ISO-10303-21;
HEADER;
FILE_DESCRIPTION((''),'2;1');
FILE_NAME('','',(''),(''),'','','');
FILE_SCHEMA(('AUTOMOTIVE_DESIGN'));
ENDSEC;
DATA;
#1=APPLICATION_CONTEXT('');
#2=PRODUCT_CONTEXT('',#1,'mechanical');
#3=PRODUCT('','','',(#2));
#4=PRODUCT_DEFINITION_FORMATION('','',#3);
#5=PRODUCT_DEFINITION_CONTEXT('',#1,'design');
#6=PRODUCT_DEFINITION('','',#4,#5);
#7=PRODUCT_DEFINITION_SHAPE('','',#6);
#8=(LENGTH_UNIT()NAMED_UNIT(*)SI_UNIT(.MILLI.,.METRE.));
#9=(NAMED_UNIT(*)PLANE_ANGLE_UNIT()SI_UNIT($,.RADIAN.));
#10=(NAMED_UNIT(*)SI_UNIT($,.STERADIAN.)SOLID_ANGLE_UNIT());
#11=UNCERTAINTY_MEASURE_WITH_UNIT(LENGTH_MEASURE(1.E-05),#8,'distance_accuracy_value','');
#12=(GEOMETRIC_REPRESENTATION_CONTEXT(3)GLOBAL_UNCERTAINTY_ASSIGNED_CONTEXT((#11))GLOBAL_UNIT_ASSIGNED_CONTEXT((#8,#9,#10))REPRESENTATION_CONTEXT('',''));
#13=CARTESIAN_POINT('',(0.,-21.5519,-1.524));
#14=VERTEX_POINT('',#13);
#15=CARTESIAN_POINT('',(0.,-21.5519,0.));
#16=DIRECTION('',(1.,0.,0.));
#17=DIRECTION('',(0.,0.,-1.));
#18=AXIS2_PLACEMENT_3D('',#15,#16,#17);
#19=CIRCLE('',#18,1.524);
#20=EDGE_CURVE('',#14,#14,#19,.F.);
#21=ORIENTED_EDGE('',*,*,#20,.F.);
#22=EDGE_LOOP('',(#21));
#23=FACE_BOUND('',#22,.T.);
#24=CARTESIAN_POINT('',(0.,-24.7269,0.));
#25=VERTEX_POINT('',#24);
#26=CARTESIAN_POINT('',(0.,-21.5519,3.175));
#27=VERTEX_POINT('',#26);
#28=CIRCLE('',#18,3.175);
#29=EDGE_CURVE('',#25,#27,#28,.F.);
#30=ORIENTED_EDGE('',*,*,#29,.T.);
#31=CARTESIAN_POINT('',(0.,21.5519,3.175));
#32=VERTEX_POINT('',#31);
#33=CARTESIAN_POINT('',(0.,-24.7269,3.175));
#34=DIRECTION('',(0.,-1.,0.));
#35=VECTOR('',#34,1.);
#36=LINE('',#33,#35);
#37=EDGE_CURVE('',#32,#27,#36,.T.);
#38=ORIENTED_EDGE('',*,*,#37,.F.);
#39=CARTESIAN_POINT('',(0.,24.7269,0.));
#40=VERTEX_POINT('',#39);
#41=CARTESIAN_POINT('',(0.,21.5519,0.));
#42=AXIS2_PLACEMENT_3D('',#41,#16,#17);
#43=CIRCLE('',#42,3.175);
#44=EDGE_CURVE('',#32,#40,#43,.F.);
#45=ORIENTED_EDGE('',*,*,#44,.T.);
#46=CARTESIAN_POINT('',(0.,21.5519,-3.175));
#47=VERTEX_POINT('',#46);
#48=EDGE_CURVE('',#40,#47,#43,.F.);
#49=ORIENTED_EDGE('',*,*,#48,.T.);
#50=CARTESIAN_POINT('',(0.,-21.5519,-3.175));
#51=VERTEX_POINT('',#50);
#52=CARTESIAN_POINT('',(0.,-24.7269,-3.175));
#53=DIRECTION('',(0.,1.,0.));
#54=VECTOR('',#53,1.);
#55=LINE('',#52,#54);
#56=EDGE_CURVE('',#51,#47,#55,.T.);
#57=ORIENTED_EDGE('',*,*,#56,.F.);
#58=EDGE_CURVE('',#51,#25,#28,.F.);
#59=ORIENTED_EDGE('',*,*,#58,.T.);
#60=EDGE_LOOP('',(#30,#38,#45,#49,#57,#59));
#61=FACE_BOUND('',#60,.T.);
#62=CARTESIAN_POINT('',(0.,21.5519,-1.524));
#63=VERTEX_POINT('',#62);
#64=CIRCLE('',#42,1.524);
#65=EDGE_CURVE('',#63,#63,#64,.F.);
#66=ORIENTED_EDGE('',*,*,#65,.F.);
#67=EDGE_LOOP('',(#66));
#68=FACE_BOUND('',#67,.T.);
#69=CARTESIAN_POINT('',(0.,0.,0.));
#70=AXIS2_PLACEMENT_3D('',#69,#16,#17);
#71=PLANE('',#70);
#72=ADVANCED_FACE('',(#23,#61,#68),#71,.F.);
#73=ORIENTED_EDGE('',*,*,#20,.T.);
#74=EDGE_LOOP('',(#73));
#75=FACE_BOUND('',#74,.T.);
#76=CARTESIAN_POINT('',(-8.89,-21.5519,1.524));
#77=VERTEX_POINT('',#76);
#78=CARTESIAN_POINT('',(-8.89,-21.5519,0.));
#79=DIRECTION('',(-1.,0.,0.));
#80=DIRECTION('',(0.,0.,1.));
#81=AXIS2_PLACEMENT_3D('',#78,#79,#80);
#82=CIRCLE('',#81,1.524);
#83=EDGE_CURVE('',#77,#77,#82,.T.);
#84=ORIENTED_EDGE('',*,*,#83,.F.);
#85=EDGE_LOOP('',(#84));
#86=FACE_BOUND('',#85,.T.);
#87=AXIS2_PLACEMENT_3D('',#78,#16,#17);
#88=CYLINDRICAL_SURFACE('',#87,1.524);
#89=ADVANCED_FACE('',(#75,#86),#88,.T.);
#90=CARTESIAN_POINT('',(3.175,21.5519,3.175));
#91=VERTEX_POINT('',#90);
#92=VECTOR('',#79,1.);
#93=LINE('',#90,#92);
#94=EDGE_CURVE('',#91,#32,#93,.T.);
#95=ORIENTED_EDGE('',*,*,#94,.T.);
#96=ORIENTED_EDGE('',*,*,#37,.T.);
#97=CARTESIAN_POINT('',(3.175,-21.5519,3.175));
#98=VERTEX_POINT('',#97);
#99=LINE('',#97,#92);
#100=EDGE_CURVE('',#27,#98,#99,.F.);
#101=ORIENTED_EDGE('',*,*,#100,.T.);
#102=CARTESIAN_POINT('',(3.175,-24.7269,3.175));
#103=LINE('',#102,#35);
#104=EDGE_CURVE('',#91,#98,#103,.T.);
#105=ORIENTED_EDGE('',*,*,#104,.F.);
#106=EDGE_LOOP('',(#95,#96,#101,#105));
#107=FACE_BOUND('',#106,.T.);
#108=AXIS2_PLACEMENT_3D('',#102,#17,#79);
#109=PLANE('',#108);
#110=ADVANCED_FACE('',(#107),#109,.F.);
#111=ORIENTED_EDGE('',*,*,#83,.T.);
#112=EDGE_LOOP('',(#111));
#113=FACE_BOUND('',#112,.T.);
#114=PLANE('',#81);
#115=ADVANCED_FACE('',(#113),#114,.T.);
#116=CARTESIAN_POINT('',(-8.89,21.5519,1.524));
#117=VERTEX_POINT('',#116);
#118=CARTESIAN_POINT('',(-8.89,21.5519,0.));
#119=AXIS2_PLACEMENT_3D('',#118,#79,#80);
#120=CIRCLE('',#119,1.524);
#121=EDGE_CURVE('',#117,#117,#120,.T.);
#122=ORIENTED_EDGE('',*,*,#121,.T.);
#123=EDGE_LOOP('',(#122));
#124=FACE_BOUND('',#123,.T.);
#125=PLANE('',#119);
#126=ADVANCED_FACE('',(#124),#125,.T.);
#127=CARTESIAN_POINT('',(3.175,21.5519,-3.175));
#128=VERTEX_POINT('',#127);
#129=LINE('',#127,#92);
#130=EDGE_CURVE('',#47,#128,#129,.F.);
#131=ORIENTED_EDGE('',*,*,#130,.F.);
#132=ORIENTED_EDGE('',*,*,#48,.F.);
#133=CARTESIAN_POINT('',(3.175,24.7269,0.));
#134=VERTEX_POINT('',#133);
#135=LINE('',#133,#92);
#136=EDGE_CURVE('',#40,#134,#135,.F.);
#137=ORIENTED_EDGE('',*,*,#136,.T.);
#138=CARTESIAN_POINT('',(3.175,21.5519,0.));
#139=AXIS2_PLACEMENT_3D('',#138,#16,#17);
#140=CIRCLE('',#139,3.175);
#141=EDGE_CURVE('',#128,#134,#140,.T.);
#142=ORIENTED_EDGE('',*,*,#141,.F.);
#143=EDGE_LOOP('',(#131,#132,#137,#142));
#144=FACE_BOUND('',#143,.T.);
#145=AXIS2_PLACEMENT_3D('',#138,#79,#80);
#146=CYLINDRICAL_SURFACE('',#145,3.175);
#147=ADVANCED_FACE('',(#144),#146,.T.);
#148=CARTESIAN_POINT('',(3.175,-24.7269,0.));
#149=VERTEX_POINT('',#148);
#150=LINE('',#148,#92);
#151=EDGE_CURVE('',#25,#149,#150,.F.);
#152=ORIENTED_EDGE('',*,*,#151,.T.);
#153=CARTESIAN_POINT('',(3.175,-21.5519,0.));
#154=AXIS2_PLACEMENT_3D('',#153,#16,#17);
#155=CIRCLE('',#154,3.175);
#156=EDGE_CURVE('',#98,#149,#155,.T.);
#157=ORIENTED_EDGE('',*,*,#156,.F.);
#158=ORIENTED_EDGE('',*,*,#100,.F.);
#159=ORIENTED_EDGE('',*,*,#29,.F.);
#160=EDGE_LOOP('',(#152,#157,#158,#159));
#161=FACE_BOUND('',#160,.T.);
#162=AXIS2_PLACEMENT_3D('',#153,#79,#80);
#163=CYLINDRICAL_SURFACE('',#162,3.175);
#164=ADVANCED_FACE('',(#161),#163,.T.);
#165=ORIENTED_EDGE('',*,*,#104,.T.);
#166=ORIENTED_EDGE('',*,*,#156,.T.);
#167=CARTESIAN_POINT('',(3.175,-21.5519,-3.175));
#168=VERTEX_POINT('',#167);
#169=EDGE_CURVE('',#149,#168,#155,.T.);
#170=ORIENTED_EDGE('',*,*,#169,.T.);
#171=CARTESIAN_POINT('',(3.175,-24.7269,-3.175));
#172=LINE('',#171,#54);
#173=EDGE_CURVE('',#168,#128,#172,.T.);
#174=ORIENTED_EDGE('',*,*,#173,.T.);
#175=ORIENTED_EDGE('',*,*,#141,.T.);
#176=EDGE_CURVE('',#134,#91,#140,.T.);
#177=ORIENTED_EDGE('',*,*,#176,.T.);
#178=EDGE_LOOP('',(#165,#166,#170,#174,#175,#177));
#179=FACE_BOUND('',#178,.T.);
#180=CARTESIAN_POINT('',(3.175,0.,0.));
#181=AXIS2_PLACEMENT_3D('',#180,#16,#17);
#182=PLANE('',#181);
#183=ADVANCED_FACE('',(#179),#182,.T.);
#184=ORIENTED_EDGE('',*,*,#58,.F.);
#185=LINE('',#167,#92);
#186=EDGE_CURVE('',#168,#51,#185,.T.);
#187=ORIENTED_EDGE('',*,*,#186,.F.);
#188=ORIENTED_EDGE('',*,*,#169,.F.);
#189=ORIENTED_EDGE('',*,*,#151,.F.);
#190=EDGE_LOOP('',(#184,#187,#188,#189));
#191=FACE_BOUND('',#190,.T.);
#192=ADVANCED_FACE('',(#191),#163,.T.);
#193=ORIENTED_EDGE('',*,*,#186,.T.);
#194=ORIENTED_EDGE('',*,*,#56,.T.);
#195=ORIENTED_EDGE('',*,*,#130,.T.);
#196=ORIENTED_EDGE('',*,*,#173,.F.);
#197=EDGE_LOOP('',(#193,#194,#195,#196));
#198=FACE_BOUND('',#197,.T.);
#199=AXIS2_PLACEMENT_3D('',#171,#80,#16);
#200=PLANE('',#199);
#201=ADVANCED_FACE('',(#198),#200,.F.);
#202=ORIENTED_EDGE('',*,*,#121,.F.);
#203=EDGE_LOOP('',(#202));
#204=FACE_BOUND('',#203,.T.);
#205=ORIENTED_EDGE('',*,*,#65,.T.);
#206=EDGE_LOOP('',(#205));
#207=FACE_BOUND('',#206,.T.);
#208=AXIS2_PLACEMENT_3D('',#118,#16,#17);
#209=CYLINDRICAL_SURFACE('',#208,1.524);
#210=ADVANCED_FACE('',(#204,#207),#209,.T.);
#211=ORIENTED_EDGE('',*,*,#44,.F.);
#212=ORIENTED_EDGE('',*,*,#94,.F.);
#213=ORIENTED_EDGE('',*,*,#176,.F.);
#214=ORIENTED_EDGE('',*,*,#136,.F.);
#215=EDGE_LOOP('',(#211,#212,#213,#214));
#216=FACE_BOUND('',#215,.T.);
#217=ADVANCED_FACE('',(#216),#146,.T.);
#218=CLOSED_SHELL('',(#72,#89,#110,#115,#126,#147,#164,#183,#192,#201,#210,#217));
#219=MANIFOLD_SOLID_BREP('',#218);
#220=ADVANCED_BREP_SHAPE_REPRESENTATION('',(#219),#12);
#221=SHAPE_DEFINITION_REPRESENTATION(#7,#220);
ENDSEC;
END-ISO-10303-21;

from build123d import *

# Parameters (mm, degrees)
SKETCH1_W           = 6.35
SKETCH1_H           = 49.4538
BOSS_EXTRUDE1_DEPTH = 3.175
SKETCH2_R           = 1.524
BOSS_EXTRUDE2_DEPTH = 8.89
FILLET1_R           = 3.175


with BuildPart() as part:
    # Sketch1 → Boss-Extrude1 (new body)
    with BuildSketch(Plane(origin=(0, 0, 0), x_dir=(0, 0, -1), z_dir=(1, 0, 0))):
        Rectangle(SKETCH1_W, SKETCH1_H)
    extrude(amount=BOSS_EXTRUDE1_DEPTH)

    # Sketch2 → Boss-Extrude2 (add)
    with BuildSketch(Plane.ZY):
        with Locations(Location((0, 21.5519, 0), (0, 0, 180))):
            Circle(SKETCH2_R)
        with Locations(Location((0, -21.5519, 0), (0, 0, 180))):
            Circle(SKETCH2_R)
    extrude(amount=BOSS_EXTRUDE2_DEPTH)

    # Fillet1
    fillet1_edges = [part.edges().sort_by_distance(p)[0] for p in [
        (1.5875, -24.7269, 3.175),
        (1.5875, -24.7269, -3.175),
        (1.5875, 24.7269, -3.175),
        (1.5875, 24.7269, 3.175),
    ]]
    fillet(fillet1_edges, radius=FILLET1_R - 0.0001)  # a hair under: the kernel refuses the full size


solid = part.part
